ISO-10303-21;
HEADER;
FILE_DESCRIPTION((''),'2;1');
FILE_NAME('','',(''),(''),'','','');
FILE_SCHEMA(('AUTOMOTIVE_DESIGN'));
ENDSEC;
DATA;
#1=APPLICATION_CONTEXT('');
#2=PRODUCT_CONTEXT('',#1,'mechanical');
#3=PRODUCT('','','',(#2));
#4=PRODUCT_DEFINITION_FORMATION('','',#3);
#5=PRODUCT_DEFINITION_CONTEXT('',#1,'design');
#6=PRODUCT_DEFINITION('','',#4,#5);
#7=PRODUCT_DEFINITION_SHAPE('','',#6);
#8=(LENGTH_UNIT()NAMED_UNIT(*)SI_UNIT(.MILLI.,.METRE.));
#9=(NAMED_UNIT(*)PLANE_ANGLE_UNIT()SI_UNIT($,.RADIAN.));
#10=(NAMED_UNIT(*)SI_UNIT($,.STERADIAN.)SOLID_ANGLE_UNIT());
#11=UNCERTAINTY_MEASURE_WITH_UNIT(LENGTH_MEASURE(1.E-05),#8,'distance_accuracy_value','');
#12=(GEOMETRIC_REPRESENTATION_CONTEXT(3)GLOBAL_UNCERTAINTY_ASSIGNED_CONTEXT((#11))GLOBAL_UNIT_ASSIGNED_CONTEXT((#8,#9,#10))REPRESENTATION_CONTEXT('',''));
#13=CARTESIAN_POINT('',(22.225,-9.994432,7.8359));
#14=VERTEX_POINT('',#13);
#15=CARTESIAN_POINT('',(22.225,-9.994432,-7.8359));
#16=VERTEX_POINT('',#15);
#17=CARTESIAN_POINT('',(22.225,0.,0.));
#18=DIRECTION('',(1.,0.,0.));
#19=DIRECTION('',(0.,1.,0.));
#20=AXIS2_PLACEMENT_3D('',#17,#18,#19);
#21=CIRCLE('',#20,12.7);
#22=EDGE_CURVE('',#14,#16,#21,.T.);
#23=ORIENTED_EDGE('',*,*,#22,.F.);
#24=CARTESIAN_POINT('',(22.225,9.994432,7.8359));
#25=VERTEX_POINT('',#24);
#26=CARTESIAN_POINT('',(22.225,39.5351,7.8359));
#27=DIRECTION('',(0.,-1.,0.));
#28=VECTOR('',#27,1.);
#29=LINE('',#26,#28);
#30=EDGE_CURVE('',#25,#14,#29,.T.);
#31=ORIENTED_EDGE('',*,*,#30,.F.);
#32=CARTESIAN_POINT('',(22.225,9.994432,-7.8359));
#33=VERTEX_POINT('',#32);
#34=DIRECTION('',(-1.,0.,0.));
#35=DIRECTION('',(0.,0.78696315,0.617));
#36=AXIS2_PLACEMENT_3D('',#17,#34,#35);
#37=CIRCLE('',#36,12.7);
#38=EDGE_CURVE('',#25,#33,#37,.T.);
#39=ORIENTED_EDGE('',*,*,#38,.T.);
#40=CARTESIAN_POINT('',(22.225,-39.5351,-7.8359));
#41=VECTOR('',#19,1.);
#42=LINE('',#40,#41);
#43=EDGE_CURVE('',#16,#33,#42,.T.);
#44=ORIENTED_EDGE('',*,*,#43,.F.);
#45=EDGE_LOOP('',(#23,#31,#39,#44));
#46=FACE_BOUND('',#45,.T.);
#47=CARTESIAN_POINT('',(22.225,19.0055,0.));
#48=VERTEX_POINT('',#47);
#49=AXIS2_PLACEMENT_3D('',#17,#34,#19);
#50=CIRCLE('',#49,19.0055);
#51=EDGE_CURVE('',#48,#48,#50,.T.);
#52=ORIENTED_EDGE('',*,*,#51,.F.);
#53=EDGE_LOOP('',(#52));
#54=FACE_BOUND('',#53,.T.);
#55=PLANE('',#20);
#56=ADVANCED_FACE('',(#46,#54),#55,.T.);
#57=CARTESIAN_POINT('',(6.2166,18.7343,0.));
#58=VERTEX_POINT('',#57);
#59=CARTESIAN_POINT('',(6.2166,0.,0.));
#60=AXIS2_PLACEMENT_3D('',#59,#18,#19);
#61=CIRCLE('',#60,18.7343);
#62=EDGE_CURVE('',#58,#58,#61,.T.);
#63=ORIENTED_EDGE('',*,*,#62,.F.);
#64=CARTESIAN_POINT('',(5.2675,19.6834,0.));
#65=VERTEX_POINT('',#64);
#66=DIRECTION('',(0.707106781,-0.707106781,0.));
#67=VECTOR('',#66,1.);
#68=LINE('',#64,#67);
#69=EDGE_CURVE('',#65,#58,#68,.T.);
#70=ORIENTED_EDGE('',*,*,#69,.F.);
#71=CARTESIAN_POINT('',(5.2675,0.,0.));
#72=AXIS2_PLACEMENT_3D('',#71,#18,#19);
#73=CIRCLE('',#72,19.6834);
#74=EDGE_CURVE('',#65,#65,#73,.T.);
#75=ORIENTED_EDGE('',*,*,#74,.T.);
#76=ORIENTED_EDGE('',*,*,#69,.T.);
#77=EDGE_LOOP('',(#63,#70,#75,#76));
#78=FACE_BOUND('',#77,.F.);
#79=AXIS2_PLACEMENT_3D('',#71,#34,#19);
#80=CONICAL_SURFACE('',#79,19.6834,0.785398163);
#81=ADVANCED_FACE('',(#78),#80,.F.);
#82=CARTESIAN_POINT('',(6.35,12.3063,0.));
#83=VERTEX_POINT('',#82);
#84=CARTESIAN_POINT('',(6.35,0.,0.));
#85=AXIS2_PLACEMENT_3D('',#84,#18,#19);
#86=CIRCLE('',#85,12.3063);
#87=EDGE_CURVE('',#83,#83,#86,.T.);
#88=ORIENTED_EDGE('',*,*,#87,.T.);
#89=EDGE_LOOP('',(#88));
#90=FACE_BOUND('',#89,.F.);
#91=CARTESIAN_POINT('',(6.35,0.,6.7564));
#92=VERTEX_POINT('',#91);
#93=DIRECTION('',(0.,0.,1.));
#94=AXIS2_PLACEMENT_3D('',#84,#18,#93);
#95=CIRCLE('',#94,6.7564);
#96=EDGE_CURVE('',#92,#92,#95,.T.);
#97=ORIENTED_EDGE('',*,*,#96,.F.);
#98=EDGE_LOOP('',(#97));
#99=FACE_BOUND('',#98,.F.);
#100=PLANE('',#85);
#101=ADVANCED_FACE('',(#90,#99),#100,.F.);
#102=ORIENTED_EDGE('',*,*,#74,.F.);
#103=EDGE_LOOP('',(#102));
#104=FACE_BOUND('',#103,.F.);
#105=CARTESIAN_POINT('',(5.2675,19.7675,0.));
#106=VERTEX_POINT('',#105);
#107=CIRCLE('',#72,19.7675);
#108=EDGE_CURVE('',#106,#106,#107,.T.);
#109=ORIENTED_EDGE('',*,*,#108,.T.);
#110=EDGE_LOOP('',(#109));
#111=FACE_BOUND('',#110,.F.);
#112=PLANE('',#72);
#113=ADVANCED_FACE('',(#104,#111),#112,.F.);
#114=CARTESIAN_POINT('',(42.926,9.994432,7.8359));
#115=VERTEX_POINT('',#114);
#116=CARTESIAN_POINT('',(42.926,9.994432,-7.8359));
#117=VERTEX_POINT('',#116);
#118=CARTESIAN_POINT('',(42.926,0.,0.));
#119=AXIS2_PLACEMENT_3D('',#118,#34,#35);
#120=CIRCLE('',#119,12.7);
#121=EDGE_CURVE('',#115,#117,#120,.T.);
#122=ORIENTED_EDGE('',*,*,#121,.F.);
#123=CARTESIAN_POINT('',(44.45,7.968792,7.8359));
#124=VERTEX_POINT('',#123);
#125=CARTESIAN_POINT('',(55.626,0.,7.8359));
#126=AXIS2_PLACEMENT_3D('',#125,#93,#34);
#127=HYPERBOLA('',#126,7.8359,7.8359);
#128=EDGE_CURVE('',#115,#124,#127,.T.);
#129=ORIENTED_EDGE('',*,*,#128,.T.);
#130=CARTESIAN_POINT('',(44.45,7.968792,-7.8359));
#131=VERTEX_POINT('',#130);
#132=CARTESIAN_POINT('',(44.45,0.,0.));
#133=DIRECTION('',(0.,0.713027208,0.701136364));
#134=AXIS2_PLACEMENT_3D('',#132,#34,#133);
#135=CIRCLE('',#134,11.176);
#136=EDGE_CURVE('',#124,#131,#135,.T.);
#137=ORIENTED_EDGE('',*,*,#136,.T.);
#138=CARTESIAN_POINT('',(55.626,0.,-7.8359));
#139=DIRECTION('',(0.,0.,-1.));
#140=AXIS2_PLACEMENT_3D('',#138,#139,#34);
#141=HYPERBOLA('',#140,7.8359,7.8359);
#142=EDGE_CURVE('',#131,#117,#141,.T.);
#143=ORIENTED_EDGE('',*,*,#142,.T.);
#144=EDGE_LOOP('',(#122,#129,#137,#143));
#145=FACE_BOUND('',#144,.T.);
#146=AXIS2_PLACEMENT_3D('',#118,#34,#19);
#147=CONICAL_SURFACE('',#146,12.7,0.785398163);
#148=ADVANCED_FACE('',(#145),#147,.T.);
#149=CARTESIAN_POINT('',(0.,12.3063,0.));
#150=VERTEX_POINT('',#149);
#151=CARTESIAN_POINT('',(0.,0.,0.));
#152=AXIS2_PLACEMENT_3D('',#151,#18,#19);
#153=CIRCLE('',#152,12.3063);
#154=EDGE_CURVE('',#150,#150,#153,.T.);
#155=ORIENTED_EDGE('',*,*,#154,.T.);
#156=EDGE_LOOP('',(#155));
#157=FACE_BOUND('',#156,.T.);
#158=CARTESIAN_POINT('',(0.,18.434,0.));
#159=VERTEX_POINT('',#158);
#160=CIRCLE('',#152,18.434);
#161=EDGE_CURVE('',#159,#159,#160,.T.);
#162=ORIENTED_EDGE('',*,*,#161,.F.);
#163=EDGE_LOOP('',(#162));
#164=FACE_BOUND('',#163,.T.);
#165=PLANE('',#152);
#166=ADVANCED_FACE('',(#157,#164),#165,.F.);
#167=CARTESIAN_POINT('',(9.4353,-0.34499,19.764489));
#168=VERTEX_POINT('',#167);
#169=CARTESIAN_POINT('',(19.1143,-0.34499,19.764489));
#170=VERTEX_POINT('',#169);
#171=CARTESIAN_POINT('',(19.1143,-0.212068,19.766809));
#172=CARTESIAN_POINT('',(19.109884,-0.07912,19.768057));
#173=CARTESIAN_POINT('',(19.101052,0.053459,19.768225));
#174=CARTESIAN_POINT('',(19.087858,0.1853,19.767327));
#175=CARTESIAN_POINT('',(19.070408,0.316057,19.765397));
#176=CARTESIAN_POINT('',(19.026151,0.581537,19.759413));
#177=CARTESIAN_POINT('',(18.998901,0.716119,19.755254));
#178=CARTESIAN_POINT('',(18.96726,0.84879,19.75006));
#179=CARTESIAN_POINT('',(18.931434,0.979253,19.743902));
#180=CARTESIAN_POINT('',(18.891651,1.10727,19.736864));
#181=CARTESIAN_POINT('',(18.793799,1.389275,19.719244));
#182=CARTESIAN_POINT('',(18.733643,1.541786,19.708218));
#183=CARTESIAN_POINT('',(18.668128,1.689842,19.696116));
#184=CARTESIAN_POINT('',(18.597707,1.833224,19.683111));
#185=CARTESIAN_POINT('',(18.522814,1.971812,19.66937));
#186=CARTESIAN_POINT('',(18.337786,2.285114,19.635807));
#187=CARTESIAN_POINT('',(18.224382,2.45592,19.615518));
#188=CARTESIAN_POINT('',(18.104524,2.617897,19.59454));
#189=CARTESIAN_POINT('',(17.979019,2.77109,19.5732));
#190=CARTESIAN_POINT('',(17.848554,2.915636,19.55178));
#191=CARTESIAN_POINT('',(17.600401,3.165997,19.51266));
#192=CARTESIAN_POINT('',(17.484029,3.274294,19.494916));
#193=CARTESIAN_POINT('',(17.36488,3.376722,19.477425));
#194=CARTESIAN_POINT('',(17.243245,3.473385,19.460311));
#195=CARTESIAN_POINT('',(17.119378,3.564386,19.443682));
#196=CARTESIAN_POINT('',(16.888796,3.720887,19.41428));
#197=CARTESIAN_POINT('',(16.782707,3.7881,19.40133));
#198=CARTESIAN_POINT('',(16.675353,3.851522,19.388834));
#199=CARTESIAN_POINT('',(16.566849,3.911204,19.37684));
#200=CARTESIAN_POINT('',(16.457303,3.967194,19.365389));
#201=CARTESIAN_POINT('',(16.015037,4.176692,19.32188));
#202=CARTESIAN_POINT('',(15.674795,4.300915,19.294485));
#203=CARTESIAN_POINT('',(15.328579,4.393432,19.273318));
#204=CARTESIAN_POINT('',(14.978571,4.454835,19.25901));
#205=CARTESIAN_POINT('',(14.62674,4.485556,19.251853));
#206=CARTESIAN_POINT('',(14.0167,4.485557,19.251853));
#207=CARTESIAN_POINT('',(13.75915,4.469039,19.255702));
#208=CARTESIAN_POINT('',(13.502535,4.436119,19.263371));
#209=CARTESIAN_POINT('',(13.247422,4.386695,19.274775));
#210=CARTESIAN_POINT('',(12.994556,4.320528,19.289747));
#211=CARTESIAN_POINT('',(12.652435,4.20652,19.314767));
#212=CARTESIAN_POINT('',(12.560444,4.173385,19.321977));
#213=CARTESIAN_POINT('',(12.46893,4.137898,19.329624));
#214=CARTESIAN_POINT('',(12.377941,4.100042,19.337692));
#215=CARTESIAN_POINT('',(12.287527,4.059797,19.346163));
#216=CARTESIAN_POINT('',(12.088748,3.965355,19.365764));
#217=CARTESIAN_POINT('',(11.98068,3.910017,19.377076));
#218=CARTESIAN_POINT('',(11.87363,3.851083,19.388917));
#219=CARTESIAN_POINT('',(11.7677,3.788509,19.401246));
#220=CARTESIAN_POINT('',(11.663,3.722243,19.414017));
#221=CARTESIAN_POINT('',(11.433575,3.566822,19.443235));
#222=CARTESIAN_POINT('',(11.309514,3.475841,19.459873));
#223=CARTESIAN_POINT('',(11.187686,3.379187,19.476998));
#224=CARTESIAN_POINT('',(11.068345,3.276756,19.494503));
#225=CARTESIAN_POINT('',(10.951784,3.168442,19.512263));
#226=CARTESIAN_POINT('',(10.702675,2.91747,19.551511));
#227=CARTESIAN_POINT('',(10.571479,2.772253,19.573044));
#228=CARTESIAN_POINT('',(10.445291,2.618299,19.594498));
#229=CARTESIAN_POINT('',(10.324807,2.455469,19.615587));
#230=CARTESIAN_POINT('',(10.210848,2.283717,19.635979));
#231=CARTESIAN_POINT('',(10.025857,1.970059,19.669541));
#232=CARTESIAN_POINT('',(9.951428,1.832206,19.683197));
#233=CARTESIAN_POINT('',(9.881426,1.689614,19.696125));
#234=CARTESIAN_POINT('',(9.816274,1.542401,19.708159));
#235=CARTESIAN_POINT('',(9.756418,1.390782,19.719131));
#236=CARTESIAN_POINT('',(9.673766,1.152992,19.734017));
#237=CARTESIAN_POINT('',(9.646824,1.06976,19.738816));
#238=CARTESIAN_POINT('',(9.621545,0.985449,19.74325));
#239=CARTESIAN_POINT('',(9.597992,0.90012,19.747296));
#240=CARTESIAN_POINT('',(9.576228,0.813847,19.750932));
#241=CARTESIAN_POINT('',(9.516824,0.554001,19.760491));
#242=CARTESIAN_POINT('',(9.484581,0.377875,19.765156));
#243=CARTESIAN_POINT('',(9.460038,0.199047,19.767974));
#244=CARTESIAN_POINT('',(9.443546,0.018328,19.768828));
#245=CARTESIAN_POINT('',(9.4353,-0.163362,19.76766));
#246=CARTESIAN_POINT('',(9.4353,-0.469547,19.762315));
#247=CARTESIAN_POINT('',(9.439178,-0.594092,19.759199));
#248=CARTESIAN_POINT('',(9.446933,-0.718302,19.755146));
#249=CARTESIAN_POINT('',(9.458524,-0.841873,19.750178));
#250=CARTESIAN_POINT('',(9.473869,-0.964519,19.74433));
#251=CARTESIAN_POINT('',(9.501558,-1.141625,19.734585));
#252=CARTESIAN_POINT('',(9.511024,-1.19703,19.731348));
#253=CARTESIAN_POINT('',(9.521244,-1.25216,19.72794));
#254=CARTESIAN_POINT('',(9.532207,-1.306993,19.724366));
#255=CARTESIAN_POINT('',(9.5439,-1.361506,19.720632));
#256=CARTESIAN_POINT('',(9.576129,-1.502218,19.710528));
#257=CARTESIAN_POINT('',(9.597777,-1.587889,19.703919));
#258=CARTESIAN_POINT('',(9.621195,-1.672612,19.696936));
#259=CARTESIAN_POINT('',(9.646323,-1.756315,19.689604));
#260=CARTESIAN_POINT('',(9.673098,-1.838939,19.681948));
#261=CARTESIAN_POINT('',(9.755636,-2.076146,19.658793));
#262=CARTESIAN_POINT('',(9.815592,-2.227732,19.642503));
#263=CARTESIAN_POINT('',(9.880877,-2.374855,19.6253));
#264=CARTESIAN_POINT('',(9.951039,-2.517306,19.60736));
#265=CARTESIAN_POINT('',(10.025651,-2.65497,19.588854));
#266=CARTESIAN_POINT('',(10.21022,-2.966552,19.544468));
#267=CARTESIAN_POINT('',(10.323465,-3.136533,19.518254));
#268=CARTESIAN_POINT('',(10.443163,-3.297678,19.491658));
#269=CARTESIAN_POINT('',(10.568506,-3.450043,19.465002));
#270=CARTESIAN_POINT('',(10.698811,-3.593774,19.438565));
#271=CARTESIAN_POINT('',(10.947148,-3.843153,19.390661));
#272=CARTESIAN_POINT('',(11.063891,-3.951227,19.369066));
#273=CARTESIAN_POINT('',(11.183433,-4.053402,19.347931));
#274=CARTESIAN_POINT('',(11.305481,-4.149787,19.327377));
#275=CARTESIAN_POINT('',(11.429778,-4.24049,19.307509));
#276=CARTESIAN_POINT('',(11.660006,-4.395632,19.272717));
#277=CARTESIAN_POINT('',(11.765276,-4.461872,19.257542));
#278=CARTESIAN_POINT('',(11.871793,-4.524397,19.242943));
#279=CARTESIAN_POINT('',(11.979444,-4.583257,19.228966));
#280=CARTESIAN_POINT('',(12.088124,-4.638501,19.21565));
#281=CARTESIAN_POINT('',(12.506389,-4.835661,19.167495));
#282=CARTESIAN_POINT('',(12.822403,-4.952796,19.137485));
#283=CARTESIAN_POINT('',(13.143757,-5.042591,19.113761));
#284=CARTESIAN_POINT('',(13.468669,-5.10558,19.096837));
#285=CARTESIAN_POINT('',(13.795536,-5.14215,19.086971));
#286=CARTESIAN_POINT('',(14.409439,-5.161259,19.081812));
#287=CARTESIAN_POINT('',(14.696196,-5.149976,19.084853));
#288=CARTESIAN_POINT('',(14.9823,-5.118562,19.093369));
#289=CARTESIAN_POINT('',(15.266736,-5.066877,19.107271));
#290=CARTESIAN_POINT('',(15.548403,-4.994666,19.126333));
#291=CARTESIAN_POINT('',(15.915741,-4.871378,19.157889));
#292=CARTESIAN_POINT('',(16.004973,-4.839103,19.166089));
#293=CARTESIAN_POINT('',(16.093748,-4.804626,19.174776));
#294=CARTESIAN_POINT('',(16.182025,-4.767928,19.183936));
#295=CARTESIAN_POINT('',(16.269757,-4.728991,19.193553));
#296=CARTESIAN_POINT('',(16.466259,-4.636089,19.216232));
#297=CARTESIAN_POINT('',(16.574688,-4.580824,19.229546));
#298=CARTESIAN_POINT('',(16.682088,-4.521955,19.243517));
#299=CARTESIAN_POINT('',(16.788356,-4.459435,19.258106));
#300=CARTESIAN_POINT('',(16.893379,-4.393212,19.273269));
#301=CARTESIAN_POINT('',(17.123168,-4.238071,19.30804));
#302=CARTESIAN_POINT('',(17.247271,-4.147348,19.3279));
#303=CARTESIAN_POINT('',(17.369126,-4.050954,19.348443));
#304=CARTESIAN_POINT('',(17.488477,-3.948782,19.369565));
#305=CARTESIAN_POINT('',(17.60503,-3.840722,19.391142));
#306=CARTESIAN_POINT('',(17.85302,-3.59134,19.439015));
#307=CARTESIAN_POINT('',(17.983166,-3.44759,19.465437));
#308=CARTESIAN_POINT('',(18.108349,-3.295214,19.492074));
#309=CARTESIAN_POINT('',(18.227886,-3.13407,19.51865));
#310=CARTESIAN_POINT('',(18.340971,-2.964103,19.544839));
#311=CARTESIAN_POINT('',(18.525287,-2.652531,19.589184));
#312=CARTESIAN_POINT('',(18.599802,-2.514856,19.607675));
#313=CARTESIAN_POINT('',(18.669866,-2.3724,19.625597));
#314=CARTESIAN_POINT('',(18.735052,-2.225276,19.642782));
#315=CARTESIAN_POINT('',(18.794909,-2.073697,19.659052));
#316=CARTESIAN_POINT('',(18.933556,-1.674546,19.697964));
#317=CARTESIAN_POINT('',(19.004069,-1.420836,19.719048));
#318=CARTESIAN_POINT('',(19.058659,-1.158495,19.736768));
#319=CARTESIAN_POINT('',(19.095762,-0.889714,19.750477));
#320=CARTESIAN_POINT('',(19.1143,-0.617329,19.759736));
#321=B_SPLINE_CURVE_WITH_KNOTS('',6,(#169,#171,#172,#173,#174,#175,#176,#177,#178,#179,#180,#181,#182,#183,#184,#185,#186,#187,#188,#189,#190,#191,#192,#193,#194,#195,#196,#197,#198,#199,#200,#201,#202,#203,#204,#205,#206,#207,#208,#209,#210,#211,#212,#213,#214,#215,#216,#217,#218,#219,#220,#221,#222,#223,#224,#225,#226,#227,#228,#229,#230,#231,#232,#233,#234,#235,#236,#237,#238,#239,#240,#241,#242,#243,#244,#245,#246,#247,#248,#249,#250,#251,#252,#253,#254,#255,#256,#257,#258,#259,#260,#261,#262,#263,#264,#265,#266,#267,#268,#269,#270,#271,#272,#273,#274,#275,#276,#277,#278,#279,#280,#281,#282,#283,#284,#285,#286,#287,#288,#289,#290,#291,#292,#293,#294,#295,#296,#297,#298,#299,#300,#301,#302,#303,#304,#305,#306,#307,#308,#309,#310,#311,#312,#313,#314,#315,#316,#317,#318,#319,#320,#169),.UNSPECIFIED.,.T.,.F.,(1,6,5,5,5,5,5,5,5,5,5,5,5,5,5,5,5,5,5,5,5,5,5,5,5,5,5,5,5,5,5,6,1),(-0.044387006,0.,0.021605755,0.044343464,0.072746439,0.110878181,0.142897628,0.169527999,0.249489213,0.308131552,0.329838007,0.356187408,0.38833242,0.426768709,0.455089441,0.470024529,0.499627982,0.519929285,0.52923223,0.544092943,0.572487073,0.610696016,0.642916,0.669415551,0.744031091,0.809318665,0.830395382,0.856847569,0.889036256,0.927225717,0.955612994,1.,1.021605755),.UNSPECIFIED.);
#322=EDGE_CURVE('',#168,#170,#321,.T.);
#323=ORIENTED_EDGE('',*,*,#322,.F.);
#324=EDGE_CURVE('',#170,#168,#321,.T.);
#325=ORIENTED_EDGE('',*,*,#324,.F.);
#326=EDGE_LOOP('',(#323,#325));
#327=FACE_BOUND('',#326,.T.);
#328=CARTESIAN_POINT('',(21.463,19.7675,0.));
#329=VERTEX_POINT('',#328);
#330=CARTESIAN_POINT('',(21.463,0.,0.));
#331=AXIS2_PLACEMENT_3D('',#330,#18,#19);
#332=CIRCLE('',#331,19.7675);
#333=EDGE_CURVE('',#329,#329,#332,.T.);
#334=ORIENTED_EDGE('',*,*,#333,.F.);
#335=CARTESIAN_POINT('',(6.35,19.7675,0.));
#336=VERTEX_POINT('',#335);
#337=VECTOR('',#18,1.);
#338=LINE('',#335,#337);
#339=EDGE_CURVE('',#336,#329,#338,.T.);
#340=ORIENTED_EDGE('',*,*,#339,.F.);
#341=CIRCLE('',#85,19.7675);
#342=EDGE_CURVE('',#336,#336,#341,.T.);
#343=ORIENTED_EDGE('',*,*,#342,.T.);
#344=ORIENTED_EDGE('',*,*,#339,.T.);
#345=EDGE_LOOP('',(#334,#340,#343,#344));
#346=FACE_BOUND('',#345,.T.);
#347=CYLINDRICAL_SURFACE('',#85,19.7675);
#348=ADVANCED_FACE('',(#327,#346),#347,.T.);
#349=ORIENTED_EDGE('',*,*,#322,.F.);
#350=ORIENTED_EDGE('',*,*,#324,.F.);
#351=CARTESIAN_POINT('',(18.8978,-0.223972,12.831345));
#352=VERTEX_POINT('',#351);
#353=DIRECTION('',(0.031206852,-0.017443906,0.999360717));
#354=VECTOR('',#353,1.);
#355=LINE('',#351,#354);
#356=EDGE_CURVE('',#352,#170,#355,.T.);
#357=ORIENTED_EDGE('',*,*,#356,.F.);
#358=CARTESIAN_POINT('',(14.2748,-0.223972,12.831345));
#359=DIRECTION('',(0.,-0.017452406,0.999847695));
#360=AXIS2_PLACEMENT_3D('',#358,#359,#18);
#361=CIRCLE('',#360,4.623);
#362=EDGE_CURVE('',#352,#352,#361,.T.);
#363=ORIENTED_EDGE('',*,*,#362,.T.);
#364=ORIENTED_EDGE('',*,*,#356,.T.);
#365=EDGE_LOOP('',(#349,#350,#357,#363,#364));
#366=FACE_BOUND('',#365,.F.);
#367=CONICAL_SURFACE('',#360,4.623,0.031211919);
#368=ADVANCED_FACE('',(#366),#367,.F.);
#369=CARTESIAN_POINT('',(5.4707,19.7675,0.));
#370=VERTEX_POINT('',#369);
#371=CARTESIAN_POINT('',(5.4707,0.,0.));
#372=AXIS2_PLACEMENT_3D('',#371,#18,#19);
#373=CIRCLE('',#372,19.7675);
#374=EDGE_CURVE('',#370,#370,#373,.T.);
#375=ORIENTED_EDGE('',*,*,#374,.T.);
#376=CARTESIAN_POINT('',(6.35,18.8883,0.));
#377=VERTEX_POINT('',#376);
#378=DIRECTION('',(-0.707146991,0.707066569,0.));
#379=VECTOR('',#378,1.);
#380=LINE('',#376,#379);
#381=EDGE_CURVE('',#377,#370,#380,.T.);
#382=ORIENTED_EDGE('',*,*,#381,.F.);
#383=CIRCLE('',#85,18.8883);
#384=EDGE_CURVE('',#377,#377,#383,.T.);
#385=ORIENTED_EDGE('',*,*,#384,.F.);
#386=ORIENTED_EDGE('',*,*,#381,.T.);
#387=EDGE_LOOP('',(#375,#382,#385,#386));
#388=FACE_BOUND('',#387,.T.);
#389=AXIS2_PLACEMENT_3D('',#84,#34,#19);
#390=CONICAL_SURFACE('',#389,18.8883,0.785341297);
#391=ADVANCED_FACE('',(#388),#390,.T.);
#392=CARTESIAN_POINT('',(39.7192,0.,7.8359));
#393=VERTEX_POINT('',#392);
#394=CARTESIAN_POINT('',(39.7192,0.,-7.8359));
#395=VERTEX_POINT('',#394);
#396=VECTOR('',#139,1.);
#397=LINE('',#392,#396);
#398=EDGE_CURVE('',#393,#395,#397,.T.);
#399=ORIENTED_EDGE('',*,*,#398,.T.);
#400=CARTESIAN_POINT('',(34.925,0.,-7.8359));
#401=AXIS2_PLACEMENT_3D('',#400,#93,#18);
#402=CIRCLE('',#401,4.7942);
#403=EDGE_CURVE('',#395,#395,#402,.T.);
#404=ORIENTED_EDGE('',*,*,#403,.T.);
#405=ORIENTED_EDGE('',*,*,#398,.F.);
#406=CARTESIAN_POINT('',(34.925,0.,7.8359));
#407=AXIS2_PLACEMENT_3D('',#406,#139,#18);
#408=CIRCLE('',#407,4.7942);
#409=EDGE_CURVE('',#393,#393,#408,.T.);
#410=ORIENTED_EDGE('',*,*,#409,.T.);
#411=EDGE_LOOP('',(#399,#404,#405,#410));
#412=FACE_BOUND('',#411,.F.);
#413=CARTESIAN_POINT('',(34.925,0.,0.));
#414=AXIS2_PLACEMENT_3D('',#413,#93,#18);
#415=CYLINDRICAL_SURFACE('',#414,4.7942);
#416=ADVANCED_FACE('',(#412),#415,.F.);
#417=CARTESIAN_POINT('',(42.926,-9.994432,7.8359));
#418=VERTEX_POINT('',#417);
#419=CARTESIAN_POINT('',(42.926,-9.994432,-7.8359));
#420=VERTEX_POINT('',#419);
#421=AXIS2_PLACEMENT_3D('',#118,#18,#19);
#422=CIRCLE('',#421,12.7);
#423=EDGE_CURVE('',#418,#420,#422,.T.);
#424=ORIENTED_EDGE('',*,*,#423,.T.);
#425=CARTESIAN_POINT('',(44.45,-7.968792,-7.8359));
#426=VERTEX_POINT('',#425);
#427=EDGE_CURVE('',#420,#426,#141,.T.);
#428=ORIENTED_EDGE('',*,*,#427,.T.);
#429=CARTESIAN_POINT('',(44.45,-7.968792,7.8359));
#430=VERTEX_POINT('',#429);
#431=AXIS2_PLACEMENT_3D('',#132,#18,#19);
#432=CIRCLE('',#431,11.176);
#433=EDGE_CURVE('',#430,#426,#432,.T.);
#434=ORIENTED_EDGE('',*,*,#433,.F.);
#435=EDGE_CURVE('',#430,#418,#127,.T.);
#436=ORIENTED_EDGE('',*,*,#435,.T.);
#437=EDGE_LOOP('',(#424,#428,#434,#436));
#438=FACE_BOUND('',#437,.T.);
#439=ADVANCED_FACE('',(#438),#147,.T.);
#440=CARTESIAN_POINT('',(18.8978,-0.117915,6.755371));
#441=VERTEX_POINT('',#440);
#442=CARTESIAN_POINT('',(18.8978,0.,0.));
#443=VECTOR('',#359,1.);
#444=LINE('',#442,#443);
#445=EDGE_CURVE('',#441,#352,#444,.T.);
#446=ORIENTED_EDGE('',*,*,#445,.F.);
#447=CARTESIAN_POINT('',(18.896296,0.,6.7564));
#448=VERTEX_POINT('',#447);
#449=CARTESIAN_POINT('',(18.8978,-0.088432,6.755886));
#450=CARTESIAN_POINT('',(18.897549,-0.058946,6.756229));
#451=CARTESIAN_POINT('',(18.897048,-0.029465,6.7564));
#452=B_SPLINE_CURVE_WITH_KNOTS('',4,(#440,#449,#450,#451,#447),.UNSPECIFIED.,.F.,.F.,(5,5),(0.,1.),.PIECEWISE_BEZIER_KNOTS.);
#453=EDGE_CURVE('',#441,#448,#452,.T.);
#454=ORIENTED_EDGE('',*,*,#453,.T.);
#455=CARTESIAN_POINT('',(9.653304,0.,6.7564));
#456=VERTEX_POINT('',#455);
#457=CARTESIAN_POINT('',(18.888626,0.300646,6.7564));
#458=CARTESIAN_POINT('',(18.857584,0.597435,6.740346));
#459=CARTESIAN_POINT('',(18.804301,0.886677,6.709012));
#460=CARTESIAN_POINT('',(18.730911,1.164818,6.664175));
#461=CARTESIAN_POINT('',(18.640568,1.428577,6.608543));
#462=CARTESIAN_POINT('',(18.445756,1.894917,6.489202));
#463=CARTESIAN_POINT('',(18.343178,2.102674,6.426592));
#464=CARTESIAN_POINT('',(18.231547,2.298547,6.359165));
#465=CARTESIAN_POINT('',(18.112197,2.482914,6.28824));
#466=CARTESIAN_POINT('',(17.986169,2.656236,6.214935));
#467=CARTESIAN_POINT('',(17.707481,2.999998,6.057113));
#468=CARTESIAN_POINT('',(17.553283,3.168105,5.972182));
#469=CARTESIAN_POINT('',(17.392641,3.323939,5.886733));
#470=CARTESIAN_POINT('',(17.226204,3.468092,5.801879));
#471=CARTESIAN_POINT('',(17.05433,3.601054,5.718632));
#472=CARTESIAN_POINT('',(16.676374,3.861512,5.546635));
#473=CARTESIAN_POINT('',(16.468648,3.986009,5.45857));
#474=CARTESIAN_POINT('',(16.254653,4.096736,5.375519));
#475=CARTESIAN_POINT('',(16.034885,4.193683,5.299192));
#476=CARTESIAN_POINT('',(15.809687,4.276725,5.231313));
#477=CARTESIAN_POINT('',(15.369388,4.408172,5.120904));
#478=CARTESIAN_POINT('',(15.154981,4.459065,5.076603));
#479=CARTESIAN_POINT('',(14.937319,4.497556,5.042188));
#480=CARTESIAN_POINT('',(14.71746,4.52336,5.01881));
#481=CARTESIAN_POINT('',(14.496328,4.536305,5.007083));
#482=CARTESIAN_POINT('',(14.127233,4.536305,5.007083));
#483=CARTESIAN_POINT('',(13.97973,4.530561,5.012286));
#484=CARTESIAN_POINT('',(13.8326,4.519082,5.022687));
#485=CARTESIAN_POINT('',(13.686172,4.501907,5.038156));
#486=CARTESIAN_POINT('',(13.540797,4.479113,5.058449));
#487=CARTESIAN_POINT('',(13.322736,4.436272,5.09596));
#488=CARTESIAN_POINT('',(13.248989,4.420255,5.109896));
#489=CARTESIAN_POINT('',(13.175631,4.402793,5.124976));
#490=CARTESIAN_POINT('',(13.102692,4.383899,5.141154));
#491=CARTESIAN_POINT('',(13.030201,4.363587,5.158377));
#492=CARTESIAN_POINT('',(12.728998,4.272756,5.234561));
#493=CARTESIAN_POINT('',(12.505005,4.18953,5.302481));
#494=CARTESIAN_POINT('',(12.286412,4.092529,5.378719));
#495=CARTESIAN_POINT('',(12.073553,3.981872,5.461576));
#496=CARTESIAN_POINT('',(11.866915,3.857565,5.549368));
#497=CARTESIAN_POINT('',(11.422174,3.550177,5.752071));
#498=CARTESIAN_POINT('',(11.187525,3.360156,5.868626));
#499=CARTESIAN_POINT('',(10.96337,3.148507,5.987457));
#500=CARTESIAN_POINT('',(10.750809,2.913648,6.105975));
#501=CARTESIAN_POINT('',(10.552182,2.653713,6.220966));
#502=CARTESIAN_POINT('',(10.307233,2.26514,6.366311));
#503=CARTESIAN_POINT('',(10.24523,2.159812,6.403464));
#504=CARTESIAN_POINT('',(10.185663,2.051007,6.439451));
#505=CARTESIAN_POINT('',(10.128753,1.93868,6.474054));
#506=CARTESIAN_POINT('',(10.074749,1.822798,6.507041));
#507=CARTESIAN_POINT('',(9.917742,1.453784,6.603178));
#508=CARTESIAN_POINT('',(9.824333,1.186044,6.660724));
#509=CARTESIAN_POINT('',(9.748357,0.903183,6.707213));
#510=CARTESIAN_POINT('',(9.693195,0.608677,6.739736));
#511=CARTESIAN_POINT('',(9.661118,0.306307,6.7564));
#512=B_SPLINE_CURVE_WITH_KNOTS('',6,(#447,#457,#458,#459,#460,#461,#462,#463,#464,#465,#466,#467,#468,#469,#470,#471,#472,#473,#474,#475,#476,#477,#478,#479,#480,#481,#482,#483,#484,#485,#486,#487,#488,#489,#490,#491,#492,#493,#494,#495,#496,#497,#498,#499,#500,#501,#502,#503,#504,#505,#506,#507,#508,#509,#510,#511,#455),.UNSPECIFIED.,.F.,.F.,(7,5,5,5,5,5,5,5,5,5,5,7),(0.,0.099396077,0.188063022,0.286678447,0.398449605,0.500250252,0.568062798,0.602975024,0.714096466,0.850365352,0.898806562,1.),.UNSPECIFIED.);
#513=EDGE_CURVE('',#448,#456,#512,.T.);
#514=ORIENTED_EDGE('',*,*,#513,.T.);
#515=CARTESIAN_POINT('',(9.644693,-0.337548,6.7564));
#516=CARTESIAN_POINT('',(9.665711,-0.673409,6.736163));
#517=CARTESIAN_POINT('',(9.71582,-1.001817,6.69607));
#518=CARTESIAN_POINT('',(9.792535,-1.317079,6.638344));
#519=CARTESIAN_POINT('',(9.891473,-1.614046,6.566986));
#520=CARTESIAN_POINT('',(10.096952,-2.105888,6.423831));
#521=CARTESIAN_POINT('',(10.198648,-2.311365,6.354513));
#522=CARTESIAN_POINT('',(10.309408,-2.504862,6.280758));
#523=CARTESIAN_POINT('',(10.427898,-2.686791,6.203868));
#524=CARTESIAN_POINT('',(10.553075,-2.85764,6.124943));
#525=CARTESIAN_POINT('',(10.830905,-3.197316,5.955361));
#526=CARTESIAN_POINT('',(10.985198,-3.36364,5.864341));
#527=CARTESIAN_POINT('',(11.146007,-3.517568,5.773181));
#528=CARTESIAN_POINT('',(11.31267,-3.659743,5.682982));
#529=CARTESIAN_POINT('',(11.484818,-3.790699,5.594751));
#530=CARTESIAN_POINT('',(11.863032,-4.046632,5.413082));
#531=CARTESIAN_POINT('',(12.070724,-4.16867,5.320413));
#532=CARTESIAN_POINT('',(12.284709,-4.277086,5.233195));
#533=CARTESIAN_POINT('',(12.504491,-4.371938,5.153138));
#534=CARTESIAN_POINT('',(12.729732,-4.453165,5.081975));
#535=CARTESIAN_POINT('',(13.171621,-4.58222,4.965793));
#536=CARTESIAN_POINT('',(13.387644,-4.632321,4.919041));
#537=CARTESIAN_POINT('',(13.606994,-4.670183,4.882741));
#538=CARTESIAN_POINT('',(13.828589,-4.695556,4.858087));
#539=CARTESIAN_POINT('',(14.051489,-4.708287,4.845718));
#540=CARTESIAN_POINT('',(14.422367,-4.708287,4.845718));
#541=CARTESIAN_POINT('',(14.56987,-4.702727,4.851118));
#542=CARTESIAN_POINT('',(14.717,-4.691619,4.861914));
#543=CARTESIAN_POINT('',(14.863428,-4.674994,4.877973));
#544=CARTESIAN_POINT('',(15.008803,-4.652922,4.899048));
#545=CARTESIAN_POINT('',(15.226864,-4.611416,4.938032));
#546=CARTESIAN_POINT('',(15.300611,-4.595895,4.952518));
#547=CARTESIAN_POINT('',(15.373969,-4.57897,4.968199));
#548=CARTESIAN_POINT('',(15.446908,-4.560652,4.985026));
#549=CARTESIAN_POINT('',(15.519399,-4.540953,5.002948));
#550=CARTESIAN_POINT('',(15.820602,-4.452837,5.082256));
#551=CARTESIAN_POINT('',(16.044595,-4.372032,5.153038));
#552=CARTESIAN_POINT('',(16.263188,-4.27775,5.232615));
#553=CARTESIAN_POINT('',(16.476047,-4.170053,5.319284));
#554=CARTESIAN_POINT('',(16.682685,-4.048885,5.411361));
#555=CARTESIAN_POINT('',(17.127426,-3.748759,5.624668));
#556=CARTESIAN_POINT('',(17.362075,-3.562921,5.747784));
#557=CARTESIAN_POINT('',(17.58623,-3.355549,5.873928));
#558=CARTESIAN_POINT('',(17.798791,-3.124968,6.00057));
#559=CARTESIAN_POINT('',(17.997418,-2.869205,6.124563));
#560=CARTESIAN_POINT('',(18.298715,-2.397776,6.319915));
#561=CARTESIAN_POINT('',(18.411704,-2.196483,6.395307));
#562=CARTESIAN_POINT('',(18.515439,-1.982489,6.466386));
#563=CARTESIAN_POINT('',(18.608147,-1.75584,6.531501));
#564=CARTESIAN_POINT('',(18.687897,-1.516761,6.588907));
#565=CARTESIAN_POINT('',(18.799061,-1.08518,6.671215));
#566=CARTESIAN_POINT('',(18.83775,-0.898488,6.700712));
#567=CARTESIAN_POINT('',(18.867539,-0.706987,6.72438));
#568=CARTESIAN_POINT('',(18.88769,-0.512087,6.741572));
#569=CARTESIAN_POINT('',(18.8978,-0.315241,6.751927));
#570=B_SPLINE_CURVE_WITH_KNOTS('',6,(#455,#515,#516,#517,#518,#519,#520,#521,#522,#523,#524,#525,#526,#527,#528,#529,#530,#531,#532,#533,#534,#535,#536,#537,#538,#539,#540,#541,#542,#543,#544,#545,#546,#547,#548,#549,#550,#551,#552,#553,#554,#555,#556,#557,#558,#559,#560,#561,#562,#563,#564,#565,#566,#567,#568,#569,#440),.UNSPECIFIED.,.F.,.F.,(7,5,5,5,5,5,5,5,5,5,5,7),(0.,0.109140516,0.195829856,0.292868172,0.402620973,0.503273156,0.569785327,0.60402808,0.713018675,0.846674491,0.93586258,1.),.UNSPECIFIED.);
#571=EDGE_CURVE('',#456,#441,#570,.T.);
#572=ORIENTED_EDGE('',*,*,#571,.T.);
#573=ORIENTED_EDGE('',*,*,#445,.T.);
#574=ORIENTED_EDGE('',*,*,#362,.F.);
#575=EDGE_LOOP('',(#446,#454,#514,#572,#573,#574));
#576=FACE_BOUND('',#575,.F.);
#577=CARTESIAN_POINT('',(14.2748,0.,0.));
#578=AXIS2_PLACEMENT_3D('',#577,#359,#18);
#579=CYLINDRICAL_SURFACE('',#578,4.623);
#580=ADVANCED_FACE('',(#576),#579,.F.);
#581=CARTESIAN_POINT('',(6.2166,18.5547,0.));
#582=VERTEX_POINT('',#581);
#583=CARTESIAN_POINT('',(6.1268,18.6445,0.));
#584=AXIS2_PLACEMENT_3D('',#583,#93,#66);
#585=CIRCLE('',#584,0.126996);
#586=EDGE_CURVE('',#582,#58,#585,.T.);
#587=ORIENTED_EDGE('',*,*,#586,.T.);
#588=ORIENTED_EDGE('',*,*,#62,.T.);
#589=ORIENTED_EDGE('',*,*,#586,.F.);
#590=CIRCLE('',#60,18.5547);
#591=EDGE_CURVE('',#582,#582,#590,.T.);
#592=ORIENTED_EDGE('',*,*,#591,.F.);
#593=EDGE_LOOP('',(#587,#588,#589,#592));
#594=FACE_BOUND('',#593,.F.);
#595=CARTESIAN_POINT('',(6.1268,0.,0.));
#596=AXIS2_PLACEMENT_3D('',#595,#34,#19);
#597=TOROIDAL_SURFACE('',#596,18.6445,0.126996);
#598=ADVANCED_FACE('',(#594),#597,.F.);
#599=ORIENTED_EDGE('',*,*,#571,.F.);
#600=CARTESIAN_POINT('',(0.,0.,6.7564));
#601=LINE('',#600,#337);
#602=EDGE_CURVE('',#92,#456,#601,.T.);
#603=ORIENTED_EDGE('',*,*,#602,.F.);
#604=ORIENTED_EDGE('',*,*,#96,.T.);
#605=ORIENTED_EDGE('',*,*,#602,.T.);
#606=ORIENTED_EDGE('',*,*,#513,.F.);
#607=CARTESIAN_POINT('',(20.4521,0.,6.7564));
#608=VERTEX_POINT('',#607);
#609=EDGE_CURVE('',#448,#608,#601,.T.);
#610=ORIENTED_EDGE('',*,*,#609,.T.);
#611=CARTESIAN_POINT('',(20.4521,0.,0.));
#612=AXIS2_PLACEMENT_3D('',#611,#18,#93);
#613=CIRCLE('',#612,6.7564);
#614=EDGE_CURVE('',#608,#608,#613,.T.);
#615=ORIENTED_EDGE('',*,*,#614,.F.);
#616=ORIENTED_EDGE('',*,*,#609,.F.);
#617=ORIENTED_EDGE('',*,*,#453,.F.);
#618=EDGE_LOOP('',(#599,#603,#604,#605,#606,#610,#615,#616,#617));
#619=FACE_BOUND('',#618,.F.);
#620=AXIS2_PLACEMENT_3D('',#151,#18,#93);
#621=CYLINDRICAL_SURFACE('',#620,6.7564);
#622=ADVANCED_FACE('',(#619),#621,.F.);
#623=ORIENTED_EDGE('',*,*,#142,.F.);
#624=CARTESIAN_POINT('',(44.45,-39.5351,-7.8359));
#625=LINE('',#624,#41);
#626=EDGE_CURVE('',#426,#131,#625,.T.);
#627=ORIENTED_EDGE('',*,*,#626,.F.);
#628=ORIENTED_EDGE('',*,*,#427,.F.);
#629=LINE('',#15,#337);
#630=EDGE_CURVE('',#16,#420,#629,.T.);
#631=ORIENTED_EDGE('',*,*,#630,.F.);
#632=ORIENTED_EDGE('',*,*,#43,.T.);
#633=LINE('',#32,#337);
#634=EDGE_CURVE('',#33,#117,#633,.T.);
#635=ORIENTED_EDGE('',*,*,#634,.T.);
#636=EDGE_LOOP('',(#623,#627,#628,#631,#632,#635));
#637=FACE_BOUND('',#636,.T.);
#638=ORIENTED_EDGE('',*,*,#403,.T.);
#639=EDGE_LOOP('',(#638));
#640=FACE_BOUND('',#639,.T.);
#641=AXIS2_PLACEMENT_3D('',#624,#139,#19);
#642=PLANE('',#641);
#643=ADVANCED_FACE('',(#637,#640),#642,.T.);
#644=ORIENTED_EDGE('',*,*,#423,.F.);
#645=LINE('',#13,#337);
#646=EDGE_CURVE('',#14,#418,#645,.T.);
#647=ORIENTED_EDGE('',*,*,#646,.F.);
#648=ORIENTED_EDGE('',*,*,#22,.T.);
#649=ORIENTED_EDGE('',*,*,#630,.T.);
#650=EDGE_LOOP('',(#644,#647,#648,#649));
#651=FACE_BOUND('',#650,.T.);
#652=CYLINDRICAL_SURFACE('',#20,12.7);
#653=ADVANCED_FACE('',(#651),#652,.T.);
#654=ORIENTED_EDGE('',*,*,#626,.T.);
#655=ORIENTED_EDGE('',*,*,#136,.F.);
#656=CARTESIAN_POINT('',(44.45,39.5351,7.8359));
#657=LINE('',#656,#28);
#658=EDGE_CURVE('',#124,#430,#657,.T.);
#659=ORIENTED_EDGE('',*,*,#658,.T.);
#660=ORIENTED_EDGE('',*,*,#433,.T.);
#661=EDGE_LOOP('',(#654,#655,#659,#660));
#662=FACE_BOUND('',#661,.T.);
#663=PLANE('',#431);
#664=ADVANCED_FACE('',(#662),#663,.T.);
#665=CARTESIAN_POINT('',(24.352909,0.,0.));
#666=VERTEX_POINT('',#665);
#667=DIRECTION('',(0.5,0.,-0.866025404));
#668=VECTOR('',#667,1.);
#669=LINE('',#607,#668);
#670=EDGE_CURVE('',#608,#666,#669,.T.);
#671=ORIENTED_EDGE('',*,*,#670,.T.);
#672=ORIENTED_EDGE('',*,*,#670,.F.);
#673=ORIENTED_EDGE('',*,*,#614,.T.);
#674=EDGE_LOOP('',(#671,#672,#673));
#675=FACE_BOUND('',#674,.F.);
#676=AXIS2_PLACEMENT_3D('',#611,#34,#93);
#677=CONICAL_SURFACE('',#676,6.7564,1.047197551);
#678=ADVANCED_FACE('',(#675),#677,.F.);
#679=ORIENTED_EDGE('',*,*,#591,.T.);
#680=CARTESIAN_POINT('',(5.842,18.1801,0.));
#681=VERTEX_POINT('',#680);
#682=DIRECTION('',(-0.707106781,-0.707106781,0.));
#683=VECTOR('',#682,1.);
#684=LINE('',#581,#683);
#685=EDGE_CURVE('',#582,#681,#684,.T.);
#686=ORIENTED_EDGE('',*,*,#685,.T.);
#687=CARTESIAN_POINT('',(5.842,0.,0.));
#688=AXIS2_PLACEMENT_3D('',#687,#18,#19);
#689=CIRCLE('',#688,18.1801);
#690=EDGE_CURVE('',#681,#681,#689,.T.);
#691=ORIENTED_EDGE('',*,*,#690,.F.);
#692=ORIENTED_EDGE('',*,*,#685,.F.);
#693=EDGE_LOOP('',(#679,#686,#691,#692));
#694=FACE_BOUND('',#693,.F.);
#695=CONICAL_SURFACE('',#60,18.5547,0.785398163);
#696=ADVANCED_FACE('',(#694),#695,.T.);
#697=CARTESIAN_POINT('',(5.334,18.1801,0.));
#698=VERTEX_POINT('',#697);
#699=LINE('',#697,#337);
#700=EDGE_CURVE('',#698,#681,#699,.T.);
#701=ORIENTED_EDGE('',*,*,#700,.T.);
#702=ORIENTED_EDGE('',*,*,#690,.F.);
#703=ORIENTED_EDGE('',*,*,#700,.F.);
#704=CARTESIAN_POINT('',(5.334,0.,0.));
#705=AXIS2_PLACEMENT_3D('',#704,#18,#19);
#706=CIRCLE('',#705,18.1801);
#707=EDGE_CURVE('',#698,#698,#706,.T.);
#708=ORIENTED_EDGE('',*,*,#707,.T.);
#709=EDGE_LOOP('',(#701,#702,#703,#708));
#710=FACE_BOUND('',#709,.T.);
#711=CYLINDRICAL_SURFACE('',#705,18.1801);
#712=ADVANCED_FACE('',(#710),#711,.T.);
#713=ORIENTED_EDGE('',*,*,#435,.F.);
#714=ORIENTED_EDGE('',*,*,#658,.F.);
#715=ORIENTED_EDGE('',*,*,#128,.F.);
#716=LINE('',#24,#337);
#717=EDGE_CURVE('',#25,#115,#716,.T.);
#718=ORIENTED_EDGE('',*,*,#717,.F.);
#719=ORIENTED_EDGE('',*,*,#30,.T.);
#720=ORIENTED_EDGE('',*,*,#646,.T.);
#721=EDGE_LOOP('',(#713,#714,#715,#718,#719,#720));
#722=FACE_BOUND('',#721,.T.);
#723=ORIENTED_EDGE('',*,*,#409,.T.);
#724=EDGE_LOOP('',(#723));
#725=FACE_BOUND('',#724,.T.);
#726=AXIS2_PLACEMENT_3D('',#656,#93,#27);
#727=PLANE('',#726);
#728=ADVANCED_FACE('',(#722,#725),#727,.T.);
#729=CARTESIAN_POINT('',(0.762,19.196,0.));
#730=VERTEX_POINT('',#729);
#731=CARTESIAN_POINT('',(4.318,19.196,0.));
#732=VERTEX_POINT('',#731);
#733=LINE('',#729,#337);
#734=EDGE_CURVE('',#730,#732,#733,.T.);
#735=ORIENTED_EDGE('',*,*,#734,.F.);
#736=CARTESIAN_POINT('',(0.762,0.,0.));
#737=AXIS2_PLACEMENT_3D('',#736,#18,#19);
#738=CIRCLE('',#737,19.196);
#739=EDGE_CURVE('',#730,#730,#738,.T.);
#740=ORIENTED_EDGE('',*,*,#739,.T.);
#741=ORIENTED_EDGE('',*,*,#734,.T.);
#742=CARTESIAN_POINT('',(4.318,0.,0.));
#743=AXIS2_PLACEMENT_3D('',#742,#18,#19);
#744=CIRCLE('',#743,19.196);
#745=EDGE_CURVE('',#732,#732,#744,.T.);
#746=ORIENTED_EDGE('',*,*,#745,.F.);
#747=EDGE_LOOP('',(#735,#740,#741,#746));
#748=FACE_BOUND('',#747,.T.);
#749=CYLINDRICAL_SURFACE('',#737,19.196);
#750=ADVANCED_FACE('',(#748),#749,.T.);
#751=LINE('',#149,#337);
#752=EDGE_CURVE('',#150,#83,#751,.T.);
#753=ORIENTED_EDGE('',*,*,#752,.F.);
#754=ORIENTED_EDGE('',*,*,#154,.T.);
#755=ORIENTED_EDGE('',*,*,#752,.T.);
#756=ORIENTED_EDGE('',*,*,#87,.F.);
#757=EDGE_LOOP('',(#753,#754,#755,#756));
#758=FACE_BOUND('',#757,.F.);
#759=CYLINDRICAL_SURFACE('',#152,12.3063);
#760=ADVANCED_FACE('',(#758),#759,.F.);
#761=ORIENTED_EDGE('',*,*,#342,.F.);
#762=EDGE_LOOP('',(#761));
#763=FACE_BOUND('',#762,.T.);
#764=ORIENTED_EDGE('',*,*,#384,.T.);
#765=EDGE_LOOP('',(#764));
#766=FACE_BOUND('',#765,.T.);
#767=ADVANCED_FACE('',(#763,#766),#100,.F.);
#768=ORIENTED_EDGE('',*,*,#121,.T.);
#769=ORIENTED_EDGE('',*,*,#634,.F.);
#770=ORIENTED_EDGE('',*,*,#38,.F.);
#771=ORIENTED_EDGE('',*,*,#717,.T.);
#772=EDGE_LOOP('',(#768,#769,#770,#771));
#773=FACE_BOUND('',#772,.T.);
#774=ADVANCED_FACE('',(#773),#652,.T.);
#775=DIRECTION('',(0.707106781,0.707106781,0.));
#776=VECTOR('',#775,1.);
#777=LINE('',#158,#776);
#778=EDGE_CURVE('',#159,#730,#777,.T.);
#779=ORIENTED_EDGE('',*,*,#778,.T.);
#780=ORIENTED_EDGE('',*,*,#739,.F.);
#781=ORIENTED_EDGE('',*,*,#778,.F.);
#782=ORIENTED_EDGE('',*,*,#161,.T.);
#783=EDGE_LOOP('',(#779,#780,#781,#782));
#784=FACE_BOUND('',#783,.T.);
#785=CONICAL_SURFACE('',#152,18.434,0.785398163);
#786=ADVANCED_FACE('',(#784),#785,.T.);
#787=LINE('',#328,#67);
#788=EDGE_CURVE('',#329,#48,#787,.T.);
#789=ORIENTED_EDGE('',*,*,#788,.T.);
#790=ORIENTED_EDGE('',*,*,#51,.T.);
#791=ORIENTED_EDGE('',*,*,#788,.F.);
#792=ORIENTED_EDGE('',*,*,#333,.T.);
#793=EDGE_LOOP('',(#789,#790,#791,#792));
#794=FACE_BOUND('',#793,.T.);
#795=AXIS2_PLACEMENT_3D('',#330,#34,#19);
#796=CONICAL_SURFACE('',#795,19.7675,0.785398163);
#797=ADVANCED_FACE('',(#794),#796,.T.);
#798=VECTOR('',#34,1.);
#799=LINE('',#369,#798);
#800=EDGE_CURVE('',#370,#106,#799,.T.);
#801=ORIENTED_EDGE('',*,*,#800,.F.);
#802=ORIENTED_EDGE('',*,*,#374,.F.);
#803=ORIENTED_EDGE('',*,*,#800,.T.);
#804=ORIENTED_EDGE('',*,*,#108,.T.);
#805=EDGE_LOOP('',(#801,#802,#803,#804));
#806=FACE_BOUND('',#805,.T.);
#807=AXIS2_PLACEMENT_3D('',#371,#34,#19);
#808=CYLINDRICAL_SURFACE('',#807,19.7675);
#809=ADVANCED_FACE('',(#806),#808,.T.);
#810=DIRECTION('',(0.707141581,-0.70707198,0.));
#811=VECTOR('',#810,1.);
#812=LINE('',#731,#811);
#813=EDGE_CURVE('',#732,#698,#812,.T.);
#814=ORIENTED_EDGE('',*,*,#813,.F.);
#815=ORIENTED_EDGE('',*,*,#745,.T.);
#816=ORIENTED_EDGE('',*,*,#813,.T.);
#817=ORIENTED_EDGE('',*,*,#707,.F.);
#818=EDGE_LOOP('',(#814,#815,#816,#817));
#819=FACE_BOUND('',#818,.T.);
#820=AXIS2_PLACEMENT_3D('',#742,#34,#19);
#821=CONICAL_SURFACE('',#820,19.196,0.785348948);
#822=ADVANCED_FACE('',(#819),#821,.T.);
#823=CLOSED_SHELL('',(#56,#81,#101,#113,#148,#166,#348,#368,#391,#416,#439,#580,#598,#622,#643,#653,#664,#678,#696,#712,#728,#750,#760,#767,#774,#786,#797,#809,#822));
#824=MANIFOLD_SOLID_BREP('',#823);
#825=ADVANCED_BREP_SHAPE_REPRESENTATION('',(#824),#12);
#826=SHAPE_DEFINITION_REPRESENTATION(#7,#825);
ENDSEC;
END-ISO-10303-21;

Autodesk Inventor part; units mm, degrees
sketch "Sketch_18" plane through (0, 0, 0) normal (0, 0, 1) x (1, 0, 0)
  line L0 (22.225, 0) -> (0, 0)
  line L1 (0, 0) -> (0, 18.434)
  line L2 (0, 18.434) -> (0.762, 19.196)
  line L3 (0.762, 19.196) -> (4.318, 19.196)
  line L4 (4.318, 19.196) -> (5.334, 18.1801)
  line L5 (5.334, 18.1801) -> (6.35, 18.1801)
  line L6 (6.35, 18.1801) -> (6.35, 19.7675)
  line L7 (6.35, 19.7675) -> (21.463, 19.7675)
  line L8 (21.463, 19.7675) -> (22.225, 19.0055)
  line L9 (22.225, 19.0055) -> (22.225, 0)
  line L10 (22.225, 0) -> (0, 0)
revolve "Revolution1" add sketch "Sketch_18" angle 360 about axis through (22.225, 0, 0) along (1, 0, 0)
sketch "Sketch_21" plane through (0, 0, 0) normal (0, 0, 1) x (1, 0, 0)
  line L0 (44.45, 0) -> (22.225, 0)
  line L1 (22.225, 0) -> (22.225, 12.7)
  line L2 (22.225, 12.7) -> (42.926, 12.7)
  line L3 (42.926, 12.7) -> (44.45, 11.176)
  line L4 (44.45, 11.176) -> (44.45, 0)
  line L5 (44.45, 0) -> (22.225, 0)
revolve "Revolution2" add sketch "Sketch_21" angle 360 about axis through (44.45, 0, 0) along (1, 0, 0)
sketch "Sketch_9" plane through (44.45, 0, 0) normal (1, 0, 0) x (0, 0, -1)
  line L0 (-39.5351, -79.0702) -> (39.5351, -79.0702)
  line L1 (39.5351, -79.0702) -> (39.5351, 79.0702)
  line L2 (39.5351, 79.0702) -> (-39.5351, 79.0702)
  line L3 (-39.5351, 79.0702) -> (-39.5351, -79.0702)
  line L4 (-7.8359, -39.5351) -> (7.8359, -39.5351)
  line L5 (7.8359, -39.5351) -> (7.8359, 39.5351)
  line L6 (7.8359, 39.5351) -> (-7.8359, 39.5351)
  line L7 (-7.8359, 39.5351) -> (-7.8359, -39.5351)
extrude "Extrusion1" cut sketch "Sketch_9" against normal blind 22.225
sketch "Sketch4" plane through (0, 0, 0) normal (-1, 0, 0) x (0, 0, 1)
  point P0 (0, 0)
hole "Hole1" at (0, 0, 0) direction (1, 0, 0) diameter 13.5128 depth 20.4521 tip angle 120
sketch "Sketch_68" plane through (0, 0, 0) normal (0, 0.9998477, 0.0174524) x (1, 0, 0)
  line L0 (14.2748, -19.7675) -> (14.2748, 0)
  line L1 (14.2748, 0) -> (18.8978, 0)
  line L2 (18.8978, 0) -> (18.8978, -12.8333)
  line L3 (18.8978, -12.8333) -> (19.1143, -19.7675)
  line L4 (19.1143, -19.7675) -> (14.2748, -19.7675)
  line L5 (14.2748, -19.7675) -> (14.2748, 0)
revolve "Revolution3" cut sketch "Sketch_68" angle 360 about axis through (14.2748, -0.345, 19.7645) along (0, -0.0174524, 0.9998477)
thread "Thread1" size "1/8" designation "1/8 - 27 NPT" standard "NPT" length 6.9376
sketch "Sketch_20" plane through (0, 0, 0) normal (0, 0, 1) x (1, 0, 0)
  line L0 (6.35, 0) -> (0, 0)
  line L1 (0, 0) -> (0, 12.3063)
  line L2 (0, 12.3063) -> (6.35, 12.3063)
  line L3 (6.35, 12.3063) -> (6.35, 0)
  line L4 (6.35, 0) -> (0, 0)
revolve "Revolution4" cut sketch "Sketch_20" angle 360 about axis through (6.35, 0, 0) along (1, 0, 0)
sketch "Sketch_24" plane through (0, 0, 0) normal (0, 0, 1) x (1, 0, 0)
  line L0 (6.35, 0) -> (5.334, 0)
  line L1 (5.2675, 19.7675) -> (5.2675, 19.6834)
  line L2 (5.2675, 19.6834) -> (6.2166, 18.7343)
  arc A0 (6.2166, 18.5547) -> (6.2166, 18.7343) centre (6.1268, 18.6445) ccw
  line L3 (6.2166, 18.5547) -> (5.842, 18.1801)
  line L4 (5.842, 18.1801) -> (5.334, 18.1801)
  line L5 (5.334, 18.1801) -> (5.334, 17.9261)
  line L6 (5.334, 17.9261) -> (6.35, 17.9261)
  line L7 (6.35, 17.9261) -> (6.35, 18.8883)
  line L8 (6.35, 18.8883) -> (5.4707, 19.7675)
  line L9 (5.4707, 19.7675) -> (5.2675, 19.7675)
revolve "Revolution5" add sketch "Sketch_24" angle 360 about axis through (6.35, 0, 0) along (1, 0, 0)
sketch "Sketch_43" plane through (0, 0, 0) normal (0, 0, 1) x (1, 0, 0)
  circle A0 centre (34.925, 0) radius 4.7942
extrude "Extrusion2" cut sketch "Sketch_43" along normal mid plane 23.5077
ref_plane "f_XY" through (22.225, 0, 0) normal (0, 0, 1) x (1, 0, 0)
ref_plane "f_YZ" through (22.225, 0, 0) normal (1, 0, 0) x (0, 1, 0)
ref_plane "f_ZX" through (22.225, 0, 0) normal (0, 1, 0) x (0, 0, 1)
ref_plane "lovra1_XY" through (38.1, 0, 0) normal (1, 0, 0) x (0, 0, -1)
ref_plane "lovra1_YZ" through (38.1, 0, 0) normal (0, 0, -1) x (0, 1, 0)
ref_plane "lovra1_ZX" through (38.1, 0, 0) normal (0, 1, 0) x (1, 0, 0)
ref_plane "lovra2_XY" through (38.1, 11.049, 0) normal (1, 0, 0) x (0, 0, -1)
ref_plane "lovra2_YZ" through (38.1, 11.049, 0) normal (0, 0, -1) x (0, 1, 0)
ref_plane "lovra2_ZX" through (38.1, 11.049, 0) normal (0, 1, 0) x (1, 0, 0)
ref_plane "lovra21_XY" through (0, 0, 5.2705) normal (1, 0, 0) x (0, 0, -1)
ref_plane "lovra21_YZ" through (0, 0, 5.2705) normal (0, 0, -1) x (0, 1, 0)
ref_plane "lovra21_ZX" through (0, 0, 5.2705) normal (0, 1, 0) x (1, 0, 0)
ref_plane "lovra22_XY" through (0, 0, -5.2705) normal (1, 0, 0) x (0, 0, -1)
ref_plane "lovra22_YZ" through (0, 0, -5.2705) normal (0, 0, -1) x (0, 1, 0)
ref_plane "lovra22_ZX" through (0, 0, -5.2705) normal (0, 1, 0) x (1, 0, 0)
ref_plane "lovra3_XY" through (38.1, -11.049, 0) normal (1, 0, 0) x (0, 0, -1)
ref_plane "lovra3_YZ" through (38.1, -11.049, 0) normal (0, 0, -1) x (0, 1, 0)
ref_plane "lovra3_ZX" through (38.1, -11.049, 0) normal (0, 1, 0) x (1, 0, 0)
ref_plane "olen_XY" through (34.925, 0, 0) normal (1, 0, 0) x (0, 0, -1)
ref_plane "olen_YZ" through (34.925, 0, 0) normal (0, 0, -1) x (0, 1, 0)
ref_plane "olen_ZX" through (34.925, 0, 0) normal (0, 1, 0) x (1, 0, 0)
ref_plane "p1_XY" through (44.45, 0, 7.8359) normal (1, 0, 0) x (0, 0, -1)
ref_plane "p1_YZ" through (44.45, 0, 7.8359) normal (0, 0, -1) x (0, 1, 0)
ref_plane "p1_ZX" through (44.45, 0, 7.8359) normal (0, 1, 0) x (1, 0, 0)
ref_plane "p2_XY" through (44.45, 0, -7.8359) normal (1, 0, 0) x (0, 0, -1)
ref_plane "p2_YZ" through (44.45, 0, -7.8359) normal (0, 0, -1) x (0, 1, 0)
ref_plane "p2_ZX" through (44.45, 0, -7.8359) normal (0, 1, 0) x (1, 0, 0)
ref_plane "port_XY" through (14.2748, 0, 0) normal (0, 0, 1) x (1, 0, 0)
ref_plane "port_YZ" through (14.2748, 0, 0) normal (1, 0, 0) x (0, 1, 0)
ref_plane "port_ZX" through (14.2748, 0, 0) normal (0, 1, 0) x (0, 0, 1)
ref_plane "port2_XY" through (44.45, 0, 0) normal (1, 0, 0) x (0, 0, -1)
ref_plane "port2_YZ" through (44.45, 0, 0) normal (0, 0, -1) x (0, 1, 0)
ref_plane "port2_ZX" through (44.45, 0, 0) normal (0, 1, 0) x (1, 0, 0)
ref_plane "thd1_XY" through (44.45, 0, 0) normal (1, 0, 0) x (0, 0, -1)
ref_plane "thd1_YZ" through (44.45, 0, 0) normal (0, 0, -1) x (0, 1, 0)
ref_plane "thd1_ZX" through (44.45, 0, 0) normal (0, 1, 0) x (1, 0, 0)
ref_plane "thd2_XY" through (44.45, 0, 0) normal (1, 0, 0) x (0, 0, -1)
ref_plane "thd2_YZ" through (44.45, 0, 0) normal (0, 0, -1) x (0, 1, 0)
ref_plane "thd2_ZX" through (44.45, 0, 0) normal (0, 1, 0) x (1, 0, 0)
ref_plane "to_mounting_bracket_XY" through (22.225, 0, 0) normal (1, 0, 0) x (0, 0, -1)
ref_plane "to_mounting_bracket_YZ" through (22.225, 0, 0) normal (0, 0, -1) x (0, 1, 0)
ref_plane "to_mounting_bracket_ZX" through (22.225, 0, 0) normal (0, 1, 0) x (1, 0, 0)
ref_plane "to_nut_XY" through (0, 0, 0) normal (1, 0, 0) x (0, 0, -1)
ref_plane "to_nut_YZ" through (0, 0, 0) normal (0, 0, -1) x (0, 1, 0)
ref_plane "to_nut_ZX" through (0, 0, 0) normal (0, 1, 0) x (1, 0, 0)
ref_plane "to_pin_XY" through (34.925, 0, 0) normal (0, 0, 1) x (1, 0, 0)
ref_plane "to_pin_YZ" through (34.925, 0, 0) normal (1, 0, 0) x (0, 1, 0)
ref_plane "to_pin_ZX" through (34.925, 0, 0) normal (0, 1, 0) x (0, 0, 1)
ref_plane "to_screw_XY" through (14.2748, 14.2875, -10.0838) normal (0, 1, 0) x (1, 0, 0)
ref_plane "to_screw_YZ" through (14.2748, 14.2875, -10.0838) normal (1, 0, 0) x (0, 0, -1)
ref_plane "to_screw_ZX" through (14.2748, 14.2875, -10.0838) normal (0, 0, -1) x (0, 1, 0)
ref_plane "to_tube_XY" through (5.334, 0, 0) normal (1, 0, 0) x (0, 0, -1)
ref_plane "to_tube_YZ" through (5.334, 0, 0) normal (0, 0, -1) x (0, 1, 0)
ref_plane "to_tube_ZX" through (5.334, 0, 0) normal (0, 1, 0) x (1, 0, 0)
properties part number "17P0000_rear_head"
